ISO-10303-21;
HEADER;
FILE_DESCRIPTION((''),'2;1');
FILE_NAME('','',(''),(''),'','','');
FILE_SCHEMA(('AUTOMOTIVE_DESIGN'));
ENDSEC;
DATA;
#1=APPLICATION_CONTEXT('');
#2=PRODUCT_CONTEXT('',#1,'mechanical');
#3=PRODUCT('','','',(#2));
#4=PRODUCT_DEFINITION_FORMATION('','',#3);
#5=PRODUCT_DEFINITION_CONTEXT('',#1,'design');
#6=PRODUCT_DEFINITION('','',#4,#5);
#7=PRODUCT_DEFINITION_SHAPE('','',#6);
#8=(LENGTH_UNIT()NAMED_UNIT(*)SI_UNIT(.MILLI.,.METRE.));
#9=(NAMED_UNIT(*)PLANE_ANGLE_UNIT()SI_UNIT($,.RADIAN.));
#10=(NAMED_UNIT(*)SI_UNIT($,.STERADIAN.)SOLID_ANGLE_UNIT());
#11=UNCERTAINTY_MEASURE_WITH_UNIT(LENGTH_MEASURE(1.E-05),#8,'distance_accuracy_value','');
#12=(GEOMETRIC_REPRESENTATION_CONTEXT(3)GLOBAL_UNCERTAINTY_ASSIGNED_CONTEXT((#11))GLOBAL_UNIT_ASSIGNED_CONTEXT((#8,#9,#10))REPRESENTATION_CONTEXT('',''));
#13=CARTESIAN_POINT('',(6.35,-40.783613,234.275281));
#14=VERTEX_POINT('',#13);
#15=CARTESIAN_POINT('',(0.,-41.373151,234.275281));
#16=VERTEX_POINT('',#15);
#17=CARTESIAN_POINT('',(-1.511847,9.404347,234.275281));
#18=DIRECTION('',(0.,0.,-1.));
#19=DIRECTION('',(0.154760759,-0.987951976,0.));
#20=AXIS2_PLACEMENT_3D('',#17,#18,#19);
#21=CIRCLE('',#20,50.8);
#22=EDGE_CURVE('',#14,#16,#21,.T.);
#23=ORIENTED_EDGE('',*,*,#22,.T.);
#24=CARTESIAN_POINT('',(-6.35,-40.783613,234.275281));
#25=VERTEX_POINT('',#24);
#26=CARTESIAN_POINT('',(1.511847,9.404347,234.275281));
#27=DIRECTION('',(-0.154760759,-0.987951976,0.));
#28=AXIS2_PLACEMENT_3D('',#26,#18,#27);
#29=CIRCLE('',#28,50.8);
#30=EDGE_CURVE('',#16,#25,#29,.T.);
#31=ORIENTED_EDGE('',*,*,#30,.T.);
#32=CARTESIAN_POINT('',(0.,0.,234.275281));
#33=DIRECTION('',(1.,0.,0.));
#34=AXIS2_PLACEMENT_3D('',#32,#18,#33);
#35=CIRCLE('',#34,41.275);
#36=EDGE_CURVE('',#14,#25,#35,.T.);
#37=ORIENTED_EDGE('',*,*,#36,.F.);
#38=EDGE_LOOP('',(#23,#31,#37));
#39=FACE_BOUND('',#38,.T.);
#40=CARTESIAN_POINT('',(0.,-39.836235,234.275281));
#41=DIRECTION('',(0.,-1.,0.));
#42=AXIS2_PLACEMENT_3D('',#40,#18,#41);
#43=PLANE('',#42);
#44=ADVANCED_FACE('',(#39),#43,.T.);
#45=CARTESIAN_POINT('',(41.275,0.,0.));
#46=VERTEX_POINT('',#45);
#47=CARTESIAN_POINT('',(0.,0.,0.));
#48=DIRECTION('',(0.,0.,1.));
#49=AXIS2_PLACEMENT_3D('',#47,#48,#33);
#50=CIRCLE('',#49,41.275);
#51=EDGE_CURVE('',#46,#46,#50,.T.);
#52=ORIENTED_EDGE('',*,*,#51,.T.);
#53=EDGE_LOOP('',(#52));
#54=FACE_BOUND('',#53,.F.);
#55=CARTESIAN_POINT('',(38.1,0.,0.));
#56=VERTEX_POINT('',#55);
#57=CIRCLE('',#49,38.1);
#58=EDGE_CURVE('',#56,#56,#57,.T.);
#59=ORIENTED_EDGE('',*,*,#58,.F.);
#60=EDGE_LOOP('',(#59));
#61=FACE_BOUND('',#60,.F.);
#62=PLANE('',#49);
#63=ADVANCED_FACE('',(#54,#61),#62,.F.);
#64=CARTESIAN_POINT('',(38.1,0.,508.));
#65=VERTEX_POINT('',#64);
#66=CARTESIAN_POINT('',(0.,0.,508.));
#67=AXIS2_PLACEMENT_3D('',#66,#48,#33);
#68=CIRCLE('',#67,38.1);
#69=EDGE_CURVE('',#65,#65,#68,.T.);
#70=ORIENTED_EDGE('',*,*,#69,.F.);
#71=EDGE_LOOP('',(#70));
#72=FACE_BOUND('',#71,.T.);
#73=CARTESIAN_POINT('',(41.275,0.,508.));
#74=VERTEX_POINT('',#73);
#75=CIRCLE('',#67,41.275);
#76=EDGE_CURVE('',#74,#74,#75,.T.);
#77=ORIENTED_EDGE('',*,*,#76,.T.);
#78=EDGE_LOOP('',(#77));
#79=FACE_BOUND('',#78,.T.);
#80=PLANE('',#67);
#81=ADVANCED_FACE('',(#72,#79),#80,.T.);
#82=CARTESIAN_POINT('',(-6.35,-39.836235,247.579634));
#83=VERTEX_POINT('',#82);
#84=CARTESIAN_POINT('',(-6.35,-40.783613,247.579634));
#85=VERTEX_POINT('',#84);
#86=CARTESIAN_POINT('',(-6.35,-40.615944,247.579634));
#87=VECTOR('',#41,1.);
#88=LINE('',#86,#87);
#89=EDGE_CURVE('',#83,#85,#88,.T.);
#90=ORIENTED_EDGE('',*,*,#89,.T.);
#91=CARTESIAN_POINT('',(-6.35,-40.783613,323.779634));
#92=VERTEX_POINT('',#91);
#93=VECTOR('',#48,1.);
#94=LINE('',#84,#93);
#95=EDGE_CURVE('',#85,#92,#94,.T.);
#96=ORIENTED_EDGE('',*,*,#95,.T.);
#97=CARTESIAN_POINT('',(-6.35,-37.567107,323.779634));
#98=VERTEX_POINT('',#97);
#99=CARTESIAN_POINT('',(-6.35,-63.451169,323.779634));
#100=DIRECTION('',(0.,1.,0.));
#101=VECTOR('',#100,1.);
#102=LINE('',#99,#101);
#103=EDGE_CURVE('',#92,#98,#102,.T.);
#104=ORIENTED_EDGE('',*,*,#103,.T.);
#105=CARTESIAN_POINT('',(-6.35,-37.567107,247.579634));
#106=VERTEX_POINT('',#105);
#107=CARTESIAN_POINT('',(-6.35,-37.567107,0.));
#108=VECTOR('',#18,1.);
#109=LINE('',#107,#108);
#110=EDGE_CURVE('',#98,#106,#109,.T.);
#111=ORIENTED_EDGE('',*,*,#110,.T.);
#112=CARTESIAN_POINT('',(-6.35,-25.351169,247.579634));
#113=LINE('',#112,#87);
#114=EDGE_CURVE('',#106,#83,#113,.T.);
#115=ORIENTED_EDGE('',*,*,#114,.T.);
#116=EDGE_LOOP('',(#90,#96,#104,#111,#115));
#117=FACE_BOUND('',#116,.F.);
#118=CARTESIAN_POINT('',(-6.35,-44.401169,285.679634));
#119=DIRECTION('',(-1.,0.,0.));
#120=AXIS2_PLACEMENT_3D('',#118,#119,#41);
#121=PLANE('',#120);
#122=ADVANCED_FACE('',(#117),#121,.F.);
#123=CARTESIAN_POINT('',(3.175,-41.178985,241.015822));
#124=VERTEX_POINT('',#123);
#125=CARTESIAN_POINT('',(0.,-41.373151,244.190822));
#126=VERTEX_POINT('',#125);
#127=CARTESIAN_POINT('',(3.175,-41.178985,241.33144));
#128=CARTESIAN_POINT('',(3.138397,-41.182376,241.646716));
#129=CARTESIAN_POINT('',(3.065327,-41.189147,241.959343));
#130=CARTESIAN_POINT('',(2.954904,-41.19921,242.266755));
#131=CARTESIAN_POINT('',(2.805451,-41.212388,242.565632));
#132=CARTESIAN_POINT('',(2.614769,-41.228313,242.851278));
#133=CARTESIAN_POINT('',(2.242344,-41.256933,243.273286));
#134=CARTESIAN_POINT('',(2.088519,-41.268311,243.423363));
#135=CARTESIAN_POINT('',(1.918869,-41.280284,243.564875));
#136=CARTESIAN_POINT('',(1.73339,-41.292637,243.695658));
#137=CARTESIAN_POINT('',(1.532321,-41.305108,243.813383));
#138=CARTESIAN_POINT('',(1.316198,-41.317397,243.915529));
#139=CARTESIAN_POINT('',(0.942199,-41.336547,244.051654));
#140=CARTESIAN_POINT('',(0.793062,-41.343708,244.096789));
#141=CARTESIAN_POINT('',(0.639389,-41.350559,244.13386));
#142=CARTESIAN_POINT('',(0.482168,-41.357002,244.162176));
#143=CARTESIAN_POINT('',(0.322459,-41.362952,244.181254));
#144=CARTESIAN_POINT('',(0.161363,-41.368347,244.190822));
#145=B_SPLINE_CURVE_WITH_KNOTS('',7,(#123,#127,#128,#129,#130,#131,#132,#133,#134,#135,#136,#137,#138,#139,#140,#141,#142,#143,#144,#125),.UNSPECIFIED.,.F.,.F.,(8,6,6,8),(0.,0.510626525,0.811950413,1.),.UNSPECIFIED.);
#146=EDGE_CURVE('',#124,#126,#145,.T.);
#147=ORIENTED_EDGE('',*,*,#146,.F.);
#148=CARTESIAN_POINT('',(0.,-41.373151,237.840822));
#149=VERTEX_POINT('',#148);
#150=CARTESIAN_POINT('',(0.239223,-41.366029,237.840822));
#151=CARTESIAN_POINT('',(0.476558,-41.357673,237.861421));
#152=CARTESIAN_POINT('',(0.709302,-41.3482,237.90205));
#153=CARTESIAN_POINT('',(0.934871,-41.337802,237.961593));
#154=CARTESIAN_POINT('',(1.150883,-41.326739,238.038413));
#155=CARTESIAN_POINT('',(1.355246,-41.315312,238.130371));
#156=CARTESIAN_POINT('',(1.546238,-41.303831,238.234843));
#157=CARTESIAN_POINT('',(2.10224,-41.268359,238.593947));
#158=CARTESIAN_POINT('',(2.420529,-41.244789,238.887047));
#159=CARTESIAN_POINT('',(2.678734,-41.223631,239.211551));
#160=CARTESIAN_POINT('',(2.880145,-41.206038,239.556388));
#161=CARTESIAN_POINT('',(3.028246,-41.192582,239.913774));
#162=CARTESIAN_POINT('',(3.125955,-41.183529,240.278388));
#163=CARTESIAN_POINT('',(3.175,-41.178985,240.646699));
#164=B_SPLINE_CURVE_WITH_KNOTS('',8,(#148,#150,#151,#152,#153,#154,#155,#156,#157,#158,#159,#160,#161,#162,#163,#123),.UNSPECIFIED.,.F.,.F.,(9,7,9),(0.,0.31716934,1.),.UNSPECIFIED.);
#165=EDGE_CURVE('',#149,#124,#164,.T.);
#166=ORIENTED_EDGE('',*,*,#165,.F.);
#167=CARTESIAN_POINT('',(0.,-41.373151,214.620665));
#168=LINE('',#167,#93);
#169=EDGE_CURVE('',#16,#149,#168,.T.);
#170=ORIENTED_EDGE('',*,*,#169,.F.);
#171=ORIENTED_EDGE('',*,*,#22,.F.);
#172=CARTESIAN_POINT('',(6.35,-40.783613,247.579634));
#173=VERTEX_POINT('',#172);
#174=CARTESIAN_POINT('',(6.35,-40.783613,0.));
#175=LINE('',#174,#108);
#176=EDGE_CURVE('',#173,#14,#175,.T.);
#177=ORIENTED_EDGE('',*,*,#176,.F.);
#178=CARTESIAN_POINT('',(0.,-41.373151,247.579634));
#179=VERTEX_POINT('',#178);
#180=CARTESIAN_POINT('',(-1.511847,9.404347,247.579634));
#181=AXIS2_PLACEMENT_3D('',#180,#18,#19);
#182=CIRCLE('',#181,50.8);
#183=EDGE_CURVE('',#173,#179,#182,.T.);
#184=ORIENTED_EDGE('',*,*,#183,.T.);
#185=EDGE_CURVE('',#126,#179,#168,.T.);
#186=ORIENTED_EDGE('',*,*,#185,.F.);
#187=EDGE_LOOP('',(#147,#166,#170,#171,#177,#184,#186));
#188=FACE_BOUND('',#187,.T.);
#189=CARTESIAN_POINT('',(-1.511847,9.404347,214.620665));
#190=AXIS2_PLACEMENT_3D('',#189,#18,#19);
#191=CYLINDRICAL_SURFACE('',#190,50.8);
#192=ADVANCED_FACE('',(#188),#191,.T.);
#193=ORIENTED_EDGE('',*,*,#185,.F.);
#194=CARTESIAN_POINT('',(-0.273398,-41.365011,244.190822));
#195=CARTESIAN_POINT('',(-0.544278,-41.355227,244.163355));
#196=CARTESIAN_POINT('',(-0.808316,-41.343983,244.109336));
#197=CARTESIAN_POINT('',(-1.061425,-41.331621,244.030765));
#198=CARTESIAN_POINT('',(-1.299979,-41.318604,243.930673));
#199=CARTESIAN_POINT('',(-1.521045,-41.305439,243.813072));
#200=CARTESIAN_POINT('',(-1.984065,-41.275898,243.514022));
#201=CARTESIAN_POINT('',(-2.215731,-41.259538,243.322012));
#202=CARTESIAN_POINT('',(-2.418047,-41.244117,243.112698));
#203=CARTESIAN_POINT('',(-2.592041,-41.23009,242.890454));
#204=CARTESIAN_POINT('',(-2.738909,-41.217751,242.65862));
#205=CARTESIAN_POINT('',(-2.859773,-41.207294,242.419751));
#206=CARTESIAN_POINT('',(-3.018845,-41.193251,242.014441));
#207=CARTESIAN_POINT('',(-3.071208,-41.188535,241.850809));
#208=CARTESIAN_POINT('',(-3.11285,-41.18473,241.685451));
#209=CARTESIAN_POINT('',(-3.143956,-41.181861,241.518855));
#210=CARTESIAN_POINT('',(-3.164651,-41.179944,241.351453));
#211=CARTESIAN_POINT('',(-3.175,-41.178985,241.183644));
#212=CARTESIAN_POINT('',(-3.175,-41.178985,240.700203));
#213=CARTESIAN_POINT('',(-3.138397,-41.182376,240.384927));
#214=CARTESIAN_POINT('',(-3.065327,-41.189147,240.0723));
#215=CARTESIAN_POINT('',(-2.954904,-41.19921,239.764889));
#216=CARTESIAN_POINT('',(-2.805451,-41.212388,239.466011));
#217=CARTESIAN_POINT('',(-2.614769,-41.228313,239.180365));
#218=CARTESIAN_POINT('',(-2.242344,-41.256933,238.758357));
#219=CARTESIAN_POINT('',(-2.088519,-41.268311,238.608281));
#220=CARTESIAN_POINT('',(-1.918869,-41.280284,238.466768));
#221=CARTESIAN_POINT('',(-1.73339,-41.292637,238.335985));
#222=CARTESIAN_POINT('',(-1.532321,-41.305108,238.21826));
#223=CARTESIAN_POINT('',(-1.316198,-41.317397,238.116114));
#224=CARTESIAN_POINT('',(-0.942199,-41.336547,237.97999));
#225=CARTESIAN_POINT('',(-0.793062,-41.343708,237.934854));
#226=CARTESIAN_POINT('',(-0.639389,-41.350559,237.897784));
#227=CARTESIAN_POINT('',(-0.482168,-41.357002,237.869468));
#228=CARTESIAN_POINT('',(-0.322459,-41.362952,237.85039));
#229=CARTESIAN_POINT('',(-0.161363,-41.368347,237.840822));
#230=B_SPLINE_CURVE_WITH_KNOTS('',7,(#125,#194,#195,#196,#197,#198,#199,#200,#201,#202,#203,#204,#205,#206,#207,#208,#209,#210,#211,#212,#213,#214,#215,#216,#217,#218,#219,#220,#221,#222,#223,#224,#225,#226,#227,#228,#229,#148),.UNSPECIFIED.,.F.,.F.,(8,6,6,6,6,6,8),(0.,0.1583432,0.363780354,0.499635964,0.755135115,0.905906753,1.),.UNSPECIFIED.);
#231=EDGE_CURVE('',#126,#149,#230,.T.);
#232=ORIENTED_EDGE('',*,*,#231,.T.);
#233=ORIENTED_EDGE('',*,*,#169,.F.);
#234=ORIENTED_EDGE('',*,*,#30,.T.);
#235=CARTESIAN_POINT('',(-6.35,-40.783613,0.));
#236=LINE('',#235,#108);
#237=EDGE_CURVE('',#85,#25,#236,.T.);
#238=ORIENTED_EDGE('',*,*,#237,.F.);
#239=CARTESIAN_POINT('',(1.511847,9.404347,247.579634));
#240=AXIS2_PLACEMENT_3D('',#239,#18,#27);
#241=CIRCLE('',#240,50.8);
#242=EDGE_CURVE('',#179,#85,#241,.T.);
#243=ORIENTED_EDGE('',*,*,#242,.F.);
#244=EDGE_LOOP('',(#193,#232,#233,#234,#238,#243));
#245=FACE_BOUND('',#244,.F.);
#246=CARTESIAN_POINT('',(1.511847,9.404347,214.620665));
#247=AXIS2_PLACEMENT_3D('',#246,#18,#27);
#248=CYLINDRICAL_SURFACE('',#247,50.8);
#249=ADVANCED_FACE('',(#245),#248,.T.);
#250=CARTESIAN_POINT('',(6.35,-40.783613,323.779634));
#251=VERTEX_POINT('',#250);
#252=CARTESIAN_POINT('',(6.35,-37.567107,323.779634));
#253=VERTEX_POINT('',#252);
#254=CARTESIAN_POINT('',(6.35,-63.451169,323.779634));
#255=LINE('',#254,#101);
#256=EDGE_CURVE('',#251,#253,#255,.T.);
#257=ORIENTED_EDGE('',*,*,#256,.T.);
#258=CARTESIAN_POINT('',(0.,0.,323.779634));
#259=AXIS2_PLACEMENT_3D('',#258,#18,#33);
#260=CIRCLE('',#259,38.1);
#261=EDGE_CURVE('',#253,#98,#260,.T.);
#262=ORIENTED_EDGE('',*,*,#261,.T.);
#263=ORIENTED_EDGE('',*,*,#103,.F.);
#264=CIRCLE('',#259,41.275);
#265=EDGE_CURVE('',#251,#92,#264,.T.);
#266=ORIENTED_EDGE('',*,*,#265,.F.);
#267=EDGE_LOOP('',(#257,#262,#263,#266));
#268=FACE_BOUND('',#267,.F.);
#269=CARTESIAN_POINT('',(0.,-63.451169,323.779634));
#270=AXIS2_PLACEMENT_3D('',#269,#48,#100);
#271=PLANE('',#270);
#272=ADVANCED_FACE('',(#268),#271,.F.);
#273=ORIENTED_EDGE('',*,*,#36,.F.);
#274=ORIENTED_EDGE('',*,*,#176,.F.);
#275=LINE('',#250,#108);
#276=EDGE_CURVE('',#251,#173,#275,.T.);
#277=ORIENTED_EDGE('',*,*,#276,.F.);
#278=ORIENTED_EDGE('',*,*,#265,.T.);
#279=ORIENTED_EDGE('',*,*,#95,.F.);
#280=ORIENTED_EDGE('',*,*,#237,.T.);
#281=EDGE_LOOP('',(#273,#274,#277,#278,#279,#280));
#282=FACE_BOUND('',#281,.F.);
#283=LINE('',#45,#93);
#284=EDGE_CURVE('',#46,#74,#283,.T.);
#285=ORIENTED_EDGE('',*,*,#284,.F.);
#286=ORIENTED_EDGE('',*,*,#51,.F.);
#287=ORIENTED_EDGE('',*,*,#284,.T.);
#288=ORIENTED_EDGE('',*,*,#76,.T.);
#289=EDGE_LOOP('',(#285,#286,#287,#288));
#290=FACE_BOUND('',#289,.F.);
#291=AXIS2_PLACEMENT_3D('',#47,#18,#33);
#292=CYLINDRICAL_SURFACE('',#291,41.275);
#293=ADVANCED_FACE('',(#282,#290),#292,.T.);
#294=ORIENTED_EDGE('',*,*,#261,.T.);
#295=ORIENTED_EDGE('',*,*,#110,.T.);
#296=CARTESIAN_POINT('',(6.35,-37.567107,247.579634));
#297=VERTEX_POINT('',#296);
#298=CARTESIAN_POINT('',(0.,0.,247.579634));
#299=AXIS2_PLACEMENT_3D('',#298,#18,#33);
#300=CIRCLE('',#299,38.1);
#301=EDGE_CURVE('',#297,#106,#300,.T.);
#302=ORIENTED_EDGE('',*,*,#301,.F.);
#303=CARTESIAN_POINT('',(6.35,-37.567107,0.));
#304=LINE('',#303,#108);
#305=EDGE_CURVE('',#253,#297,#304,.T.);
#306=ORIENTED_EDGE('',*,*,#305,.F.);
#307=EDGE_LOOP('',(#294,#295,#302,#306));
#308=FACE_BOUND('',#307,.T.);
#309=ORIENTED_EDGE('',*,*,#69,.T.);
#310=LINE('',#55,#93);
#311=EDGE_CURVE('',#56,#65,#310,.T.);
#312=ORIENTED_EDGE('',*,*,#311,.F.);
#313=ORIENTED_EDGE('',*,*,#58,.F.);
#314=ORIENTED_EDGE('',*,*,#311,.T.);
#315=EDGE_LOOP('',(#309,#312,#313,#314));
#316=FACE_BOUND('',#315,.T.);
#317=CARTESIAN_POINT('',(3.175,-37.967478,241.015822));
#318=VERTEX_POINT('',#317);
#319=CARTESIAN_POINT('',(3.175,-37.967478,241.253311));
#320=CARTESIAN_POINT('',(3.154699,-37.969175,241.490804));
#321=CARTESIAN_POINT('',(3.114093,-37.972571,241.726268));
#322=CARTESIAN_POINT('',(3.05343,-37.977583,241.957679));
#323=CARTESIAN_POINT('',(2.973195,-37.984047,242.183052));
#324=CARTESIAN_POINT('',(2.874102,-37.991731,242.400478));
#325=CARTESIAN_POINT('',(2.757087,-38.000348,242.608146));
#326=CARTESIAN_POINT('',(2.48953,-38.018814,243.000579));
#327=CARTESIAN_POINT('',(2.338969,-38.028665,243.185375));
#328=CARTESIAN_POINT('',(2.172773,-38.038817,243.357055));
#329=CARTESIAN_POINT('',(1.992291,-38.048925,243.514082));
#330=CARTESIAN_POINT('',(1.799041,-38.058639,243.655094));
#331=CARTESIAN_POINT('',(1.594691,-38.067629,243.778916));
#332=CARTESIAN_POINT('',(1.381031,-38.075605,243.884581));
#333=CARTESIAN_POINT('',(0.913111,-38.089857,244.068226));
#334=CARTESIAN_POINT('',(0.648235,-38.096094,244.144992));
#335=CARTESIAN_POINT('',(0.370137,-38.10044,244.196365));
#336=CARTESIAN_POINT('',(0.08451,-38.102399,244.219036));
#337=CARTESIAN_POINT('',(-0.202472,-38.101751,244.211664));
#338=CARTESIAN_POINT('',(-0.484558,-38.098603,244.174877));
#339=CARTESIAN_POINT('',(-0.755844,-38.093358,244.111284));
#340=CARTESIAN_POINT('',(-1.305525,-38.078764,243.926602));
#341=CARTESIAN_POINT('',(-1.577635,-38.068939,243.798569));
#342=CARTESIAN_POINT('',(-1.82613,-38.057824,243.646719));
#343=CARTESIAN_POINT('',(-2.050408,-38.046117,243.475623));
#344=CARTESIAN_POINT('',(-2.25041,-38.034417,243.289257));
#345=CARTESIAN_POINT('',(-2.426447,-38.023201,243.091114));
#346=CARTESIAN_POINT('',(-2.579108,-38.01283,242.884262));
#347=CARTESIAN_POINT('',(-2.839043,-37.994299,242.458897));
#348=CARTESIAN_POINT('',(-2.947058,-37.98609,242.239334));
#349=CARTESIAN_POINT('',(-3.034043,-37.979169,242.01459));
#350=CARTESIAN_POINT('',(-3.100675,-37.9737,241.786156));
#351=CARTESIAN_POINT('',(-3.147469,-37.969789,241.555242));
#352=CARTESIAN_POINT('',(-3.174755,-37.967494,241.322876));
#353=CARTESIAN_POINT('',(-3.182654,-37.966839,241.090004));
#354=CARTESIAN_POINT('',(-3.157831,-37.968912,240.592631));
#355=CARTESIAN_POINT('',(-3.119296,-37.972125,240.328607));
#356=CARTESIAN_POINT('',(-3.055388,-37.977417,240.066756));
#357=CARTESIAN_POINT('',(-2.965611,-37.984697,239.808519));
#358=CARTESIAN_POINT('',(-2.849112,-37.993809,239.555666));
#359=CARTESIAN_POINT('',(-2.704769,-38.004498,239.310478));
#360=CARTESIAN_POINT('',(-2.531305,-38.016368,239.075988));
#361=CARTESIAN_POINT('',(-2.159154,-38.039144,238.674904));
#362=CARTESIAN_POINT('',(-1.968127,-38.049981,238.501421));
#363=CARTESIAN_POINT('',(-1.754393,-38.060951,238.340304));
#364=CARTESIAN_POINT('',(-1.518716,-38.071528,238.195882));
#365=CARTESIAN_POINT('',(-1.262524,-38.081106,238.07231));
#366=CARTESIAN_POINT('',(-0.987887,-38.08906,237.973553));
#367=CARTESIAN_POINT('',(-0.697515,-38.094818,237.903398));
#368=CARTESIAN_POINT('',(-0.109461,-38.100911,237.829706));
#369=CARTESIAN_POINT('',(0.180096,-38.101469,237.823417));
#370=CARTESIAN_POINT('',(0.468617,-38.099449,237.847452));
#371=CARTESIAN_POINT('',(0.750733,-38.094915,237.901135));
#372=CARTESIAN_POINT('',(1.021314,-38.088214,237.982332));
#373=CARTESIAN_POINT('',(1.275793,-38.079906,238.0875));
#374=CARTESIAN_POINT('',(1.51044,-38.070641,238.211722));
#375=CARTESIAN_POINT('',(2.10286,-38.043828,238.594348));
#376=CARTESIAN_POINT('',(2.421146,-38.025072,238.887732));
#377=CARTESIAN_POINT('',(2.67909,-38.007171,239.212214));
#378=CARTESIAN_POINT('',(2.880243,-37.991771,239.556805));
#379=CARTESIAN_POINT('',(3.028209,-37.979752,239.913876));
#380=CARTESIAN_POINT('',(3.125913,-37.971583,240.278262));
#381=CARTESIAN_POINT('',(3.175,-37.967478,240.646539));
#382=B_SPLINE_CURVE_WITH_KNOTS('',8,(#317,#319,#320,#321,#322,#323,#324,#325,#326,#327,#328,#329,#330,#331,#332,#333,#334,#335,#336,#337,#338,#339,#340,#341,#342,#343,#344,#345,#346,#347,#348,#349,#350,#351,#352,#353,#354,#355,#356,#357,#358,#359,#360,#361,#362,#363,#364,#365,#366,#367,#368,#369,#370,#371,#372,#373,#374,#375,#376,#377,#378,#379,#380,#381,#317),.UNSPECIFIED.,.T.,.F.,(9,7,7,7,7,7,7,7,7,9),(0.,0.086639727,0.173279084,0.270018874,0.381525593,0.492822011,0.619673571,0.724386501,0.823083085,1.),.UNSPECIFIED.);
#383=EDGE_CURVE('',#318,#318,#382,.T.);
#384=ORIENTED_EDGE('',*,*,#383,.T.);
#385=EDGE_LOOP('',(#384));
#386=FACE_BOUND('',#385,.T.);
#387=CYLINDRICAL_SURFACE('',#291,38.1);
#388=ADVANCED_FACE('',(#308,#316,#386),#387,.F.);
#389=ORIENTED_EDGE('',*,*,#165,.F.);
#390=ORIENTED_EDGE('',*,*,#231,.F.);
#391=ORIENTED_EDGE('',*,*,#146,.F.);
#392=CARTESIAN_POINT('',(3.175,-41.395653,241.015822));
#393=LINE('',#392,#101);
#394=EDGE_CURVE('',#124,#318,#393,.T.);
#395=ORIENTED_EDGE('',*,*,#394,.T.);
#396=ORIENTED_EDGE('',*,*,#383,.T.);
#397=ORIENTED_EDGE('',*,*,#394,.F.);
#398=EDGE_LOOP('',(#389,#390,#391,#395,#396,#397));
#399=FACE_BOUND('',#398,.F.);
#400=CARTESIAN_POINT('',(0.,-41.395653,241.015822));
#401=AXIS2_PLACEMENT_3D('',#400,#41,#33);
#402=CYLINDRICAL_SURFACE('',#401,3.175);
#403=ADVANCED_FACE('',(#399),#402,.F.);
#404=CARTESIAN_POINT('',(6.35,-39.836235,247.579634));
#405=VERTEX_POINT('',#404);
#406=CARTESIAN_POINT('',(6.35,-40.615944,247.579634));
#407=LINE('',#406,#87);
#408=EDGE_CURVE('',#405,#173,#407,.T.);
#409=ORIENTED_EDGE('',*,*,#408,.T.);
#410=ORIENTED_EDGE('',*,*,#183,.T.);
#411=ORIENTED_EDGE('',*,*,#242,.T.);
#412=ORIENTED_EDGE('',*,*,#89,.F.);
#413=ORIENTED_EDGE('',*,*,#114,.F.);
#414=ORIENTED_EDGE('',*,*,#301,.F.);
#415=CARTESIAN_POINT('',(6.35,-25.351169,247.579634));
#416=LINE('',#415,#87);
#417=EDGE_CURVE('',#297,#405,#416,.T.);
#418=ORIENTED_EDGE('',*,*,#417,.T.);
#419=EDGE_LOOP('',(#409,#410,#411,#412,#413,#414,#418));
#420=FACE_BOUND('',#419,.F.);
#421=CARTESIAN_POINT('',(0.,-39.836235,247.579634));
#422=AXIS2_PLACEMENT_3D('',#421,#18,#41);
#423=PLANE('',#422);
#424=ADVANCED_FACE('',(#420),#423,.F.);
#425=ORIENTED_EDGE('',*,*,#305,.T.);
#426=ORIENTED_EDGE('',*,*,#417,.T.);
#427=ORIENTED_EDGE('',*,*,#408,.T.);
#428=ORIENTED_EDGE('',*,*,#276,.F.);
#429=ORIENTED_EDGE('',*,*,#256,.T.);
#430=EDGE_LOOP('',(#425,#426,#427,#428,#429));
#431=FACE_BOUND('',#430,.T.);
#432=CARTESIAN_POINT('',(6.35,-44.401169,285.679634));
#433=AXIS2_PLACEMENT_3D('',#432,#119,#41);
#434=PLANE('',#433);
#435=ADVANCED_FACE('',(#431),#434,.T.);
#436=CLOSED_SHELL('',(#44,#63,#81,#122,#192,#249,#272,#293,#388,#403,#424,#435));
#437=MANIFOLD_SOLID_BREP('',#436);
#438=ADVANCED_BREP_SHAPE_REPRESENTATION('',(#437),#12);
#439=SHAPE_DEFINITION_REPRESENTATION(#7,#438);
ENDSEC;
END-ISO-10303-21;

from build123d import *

# Parameters (mm, degrees)
F0_R        = 41.275
F0_R_2      = 38.1
F1_DEPTH    = 508
F3_W        = 1.5594176948
F3_H        = 13.3043527603
F4_DEPTH    = 6.35
F5_DEPTH    = 6.35
F6_R        = 3.175
F7_DEPTH    = 25.4
F8_T1_DEPTH = 52.6135854812


# Not quite as in the source:
# - a fillet or chamfer that OpenCascade refuses, or shapes differently, is made with other operations: its cross-section is extruded or revolved along the edge and cut away or added


with BuildPart() as f1:
    # F0 (on Top) → F1 (new body)
    with BuildSketch(Plane.XY):
        Circle(F0_R)
        Circle(F0_R_2, mode=Mode.SUBTRACT)
    extrude(amount=F1_DEPTH)

    # F3 (on face) → F4 (cut, symmetric)
    with BuildSketch(Plane(origin=(0, 0, 0), x_dir=(0, -1, 0), z_dir=(-1, 0, 0))):
        Polygon((63.4511685878, 247.5796341896), (63.4511685878, 323.7796341896), (25.3511685878, 323.7796341896), (25.3511685878, 247.5796341896), (39.8362353444, 247.5796341896), (41.3956530392, 247.5796341896), align=None)
        with Locations((40.6159441918, 240.9274578094)):
            Rectangle(F3_W, F3_H)
    extrude(amount=F4_DEPTH, both=True, mode=Mode.SUBTRACT)

    # F3 (on face) → F5 (join, symmetric)
    with BuildSketch(Plane(origin=(0, 0, 0), x_dir=(0, -1, 0), z_dir=(-1, 0, 0))):
        with Locations((40.6159441918, 240.9274578094)):
            Rectangle(F3_W, F3_H)
    extrude(amount=F5_DEPTH, both=True)

    # F6 (on face) → F7 (cut)
    with BuildSketch(Plane.XZ.offset(41.3956530392)):
        with Locations((0, 241.0158216953)):
            Circle(F6_R)
    extrude(amount=-F7_DEPTH, mode=Mode.SUBTRACT)

    # F8: fillet of radius 50.8 on 2 edges, made by hand

    # F8_s2 → F8_t1 (cut)
    with BuildSketch(Plane.XY.offset(214.6206650688)):
        with BuildLine():
            ThreePointArc((-6.35, -40.7836134373), (-2.4309704551, -41.2424120087), (1.5118465442, -41.3956530392))
            Line((1.5118465442, -41.3956530392), (-6.35, -41.3956530392))
            Line((-6.35, -41.3956530392), (-6.35, -40.7836134373))
        make_face()
        with BuildLine():
            ThreePointArc((6.35, -40.7836134373), (2.4309704551, -41.2424120087), (-1.5118465442, -41.3956530392))
            Line((-1.5118465442, -41.3956530392), (6.35, -41.3956530392))
            Line((6.35, -41.3956530392), (6.35, -40.7836134373))
        make_face()
    extrude(amount=F8_T1_DEPTH, mode=Mode.SUBTRACT)


solid = f1.part
